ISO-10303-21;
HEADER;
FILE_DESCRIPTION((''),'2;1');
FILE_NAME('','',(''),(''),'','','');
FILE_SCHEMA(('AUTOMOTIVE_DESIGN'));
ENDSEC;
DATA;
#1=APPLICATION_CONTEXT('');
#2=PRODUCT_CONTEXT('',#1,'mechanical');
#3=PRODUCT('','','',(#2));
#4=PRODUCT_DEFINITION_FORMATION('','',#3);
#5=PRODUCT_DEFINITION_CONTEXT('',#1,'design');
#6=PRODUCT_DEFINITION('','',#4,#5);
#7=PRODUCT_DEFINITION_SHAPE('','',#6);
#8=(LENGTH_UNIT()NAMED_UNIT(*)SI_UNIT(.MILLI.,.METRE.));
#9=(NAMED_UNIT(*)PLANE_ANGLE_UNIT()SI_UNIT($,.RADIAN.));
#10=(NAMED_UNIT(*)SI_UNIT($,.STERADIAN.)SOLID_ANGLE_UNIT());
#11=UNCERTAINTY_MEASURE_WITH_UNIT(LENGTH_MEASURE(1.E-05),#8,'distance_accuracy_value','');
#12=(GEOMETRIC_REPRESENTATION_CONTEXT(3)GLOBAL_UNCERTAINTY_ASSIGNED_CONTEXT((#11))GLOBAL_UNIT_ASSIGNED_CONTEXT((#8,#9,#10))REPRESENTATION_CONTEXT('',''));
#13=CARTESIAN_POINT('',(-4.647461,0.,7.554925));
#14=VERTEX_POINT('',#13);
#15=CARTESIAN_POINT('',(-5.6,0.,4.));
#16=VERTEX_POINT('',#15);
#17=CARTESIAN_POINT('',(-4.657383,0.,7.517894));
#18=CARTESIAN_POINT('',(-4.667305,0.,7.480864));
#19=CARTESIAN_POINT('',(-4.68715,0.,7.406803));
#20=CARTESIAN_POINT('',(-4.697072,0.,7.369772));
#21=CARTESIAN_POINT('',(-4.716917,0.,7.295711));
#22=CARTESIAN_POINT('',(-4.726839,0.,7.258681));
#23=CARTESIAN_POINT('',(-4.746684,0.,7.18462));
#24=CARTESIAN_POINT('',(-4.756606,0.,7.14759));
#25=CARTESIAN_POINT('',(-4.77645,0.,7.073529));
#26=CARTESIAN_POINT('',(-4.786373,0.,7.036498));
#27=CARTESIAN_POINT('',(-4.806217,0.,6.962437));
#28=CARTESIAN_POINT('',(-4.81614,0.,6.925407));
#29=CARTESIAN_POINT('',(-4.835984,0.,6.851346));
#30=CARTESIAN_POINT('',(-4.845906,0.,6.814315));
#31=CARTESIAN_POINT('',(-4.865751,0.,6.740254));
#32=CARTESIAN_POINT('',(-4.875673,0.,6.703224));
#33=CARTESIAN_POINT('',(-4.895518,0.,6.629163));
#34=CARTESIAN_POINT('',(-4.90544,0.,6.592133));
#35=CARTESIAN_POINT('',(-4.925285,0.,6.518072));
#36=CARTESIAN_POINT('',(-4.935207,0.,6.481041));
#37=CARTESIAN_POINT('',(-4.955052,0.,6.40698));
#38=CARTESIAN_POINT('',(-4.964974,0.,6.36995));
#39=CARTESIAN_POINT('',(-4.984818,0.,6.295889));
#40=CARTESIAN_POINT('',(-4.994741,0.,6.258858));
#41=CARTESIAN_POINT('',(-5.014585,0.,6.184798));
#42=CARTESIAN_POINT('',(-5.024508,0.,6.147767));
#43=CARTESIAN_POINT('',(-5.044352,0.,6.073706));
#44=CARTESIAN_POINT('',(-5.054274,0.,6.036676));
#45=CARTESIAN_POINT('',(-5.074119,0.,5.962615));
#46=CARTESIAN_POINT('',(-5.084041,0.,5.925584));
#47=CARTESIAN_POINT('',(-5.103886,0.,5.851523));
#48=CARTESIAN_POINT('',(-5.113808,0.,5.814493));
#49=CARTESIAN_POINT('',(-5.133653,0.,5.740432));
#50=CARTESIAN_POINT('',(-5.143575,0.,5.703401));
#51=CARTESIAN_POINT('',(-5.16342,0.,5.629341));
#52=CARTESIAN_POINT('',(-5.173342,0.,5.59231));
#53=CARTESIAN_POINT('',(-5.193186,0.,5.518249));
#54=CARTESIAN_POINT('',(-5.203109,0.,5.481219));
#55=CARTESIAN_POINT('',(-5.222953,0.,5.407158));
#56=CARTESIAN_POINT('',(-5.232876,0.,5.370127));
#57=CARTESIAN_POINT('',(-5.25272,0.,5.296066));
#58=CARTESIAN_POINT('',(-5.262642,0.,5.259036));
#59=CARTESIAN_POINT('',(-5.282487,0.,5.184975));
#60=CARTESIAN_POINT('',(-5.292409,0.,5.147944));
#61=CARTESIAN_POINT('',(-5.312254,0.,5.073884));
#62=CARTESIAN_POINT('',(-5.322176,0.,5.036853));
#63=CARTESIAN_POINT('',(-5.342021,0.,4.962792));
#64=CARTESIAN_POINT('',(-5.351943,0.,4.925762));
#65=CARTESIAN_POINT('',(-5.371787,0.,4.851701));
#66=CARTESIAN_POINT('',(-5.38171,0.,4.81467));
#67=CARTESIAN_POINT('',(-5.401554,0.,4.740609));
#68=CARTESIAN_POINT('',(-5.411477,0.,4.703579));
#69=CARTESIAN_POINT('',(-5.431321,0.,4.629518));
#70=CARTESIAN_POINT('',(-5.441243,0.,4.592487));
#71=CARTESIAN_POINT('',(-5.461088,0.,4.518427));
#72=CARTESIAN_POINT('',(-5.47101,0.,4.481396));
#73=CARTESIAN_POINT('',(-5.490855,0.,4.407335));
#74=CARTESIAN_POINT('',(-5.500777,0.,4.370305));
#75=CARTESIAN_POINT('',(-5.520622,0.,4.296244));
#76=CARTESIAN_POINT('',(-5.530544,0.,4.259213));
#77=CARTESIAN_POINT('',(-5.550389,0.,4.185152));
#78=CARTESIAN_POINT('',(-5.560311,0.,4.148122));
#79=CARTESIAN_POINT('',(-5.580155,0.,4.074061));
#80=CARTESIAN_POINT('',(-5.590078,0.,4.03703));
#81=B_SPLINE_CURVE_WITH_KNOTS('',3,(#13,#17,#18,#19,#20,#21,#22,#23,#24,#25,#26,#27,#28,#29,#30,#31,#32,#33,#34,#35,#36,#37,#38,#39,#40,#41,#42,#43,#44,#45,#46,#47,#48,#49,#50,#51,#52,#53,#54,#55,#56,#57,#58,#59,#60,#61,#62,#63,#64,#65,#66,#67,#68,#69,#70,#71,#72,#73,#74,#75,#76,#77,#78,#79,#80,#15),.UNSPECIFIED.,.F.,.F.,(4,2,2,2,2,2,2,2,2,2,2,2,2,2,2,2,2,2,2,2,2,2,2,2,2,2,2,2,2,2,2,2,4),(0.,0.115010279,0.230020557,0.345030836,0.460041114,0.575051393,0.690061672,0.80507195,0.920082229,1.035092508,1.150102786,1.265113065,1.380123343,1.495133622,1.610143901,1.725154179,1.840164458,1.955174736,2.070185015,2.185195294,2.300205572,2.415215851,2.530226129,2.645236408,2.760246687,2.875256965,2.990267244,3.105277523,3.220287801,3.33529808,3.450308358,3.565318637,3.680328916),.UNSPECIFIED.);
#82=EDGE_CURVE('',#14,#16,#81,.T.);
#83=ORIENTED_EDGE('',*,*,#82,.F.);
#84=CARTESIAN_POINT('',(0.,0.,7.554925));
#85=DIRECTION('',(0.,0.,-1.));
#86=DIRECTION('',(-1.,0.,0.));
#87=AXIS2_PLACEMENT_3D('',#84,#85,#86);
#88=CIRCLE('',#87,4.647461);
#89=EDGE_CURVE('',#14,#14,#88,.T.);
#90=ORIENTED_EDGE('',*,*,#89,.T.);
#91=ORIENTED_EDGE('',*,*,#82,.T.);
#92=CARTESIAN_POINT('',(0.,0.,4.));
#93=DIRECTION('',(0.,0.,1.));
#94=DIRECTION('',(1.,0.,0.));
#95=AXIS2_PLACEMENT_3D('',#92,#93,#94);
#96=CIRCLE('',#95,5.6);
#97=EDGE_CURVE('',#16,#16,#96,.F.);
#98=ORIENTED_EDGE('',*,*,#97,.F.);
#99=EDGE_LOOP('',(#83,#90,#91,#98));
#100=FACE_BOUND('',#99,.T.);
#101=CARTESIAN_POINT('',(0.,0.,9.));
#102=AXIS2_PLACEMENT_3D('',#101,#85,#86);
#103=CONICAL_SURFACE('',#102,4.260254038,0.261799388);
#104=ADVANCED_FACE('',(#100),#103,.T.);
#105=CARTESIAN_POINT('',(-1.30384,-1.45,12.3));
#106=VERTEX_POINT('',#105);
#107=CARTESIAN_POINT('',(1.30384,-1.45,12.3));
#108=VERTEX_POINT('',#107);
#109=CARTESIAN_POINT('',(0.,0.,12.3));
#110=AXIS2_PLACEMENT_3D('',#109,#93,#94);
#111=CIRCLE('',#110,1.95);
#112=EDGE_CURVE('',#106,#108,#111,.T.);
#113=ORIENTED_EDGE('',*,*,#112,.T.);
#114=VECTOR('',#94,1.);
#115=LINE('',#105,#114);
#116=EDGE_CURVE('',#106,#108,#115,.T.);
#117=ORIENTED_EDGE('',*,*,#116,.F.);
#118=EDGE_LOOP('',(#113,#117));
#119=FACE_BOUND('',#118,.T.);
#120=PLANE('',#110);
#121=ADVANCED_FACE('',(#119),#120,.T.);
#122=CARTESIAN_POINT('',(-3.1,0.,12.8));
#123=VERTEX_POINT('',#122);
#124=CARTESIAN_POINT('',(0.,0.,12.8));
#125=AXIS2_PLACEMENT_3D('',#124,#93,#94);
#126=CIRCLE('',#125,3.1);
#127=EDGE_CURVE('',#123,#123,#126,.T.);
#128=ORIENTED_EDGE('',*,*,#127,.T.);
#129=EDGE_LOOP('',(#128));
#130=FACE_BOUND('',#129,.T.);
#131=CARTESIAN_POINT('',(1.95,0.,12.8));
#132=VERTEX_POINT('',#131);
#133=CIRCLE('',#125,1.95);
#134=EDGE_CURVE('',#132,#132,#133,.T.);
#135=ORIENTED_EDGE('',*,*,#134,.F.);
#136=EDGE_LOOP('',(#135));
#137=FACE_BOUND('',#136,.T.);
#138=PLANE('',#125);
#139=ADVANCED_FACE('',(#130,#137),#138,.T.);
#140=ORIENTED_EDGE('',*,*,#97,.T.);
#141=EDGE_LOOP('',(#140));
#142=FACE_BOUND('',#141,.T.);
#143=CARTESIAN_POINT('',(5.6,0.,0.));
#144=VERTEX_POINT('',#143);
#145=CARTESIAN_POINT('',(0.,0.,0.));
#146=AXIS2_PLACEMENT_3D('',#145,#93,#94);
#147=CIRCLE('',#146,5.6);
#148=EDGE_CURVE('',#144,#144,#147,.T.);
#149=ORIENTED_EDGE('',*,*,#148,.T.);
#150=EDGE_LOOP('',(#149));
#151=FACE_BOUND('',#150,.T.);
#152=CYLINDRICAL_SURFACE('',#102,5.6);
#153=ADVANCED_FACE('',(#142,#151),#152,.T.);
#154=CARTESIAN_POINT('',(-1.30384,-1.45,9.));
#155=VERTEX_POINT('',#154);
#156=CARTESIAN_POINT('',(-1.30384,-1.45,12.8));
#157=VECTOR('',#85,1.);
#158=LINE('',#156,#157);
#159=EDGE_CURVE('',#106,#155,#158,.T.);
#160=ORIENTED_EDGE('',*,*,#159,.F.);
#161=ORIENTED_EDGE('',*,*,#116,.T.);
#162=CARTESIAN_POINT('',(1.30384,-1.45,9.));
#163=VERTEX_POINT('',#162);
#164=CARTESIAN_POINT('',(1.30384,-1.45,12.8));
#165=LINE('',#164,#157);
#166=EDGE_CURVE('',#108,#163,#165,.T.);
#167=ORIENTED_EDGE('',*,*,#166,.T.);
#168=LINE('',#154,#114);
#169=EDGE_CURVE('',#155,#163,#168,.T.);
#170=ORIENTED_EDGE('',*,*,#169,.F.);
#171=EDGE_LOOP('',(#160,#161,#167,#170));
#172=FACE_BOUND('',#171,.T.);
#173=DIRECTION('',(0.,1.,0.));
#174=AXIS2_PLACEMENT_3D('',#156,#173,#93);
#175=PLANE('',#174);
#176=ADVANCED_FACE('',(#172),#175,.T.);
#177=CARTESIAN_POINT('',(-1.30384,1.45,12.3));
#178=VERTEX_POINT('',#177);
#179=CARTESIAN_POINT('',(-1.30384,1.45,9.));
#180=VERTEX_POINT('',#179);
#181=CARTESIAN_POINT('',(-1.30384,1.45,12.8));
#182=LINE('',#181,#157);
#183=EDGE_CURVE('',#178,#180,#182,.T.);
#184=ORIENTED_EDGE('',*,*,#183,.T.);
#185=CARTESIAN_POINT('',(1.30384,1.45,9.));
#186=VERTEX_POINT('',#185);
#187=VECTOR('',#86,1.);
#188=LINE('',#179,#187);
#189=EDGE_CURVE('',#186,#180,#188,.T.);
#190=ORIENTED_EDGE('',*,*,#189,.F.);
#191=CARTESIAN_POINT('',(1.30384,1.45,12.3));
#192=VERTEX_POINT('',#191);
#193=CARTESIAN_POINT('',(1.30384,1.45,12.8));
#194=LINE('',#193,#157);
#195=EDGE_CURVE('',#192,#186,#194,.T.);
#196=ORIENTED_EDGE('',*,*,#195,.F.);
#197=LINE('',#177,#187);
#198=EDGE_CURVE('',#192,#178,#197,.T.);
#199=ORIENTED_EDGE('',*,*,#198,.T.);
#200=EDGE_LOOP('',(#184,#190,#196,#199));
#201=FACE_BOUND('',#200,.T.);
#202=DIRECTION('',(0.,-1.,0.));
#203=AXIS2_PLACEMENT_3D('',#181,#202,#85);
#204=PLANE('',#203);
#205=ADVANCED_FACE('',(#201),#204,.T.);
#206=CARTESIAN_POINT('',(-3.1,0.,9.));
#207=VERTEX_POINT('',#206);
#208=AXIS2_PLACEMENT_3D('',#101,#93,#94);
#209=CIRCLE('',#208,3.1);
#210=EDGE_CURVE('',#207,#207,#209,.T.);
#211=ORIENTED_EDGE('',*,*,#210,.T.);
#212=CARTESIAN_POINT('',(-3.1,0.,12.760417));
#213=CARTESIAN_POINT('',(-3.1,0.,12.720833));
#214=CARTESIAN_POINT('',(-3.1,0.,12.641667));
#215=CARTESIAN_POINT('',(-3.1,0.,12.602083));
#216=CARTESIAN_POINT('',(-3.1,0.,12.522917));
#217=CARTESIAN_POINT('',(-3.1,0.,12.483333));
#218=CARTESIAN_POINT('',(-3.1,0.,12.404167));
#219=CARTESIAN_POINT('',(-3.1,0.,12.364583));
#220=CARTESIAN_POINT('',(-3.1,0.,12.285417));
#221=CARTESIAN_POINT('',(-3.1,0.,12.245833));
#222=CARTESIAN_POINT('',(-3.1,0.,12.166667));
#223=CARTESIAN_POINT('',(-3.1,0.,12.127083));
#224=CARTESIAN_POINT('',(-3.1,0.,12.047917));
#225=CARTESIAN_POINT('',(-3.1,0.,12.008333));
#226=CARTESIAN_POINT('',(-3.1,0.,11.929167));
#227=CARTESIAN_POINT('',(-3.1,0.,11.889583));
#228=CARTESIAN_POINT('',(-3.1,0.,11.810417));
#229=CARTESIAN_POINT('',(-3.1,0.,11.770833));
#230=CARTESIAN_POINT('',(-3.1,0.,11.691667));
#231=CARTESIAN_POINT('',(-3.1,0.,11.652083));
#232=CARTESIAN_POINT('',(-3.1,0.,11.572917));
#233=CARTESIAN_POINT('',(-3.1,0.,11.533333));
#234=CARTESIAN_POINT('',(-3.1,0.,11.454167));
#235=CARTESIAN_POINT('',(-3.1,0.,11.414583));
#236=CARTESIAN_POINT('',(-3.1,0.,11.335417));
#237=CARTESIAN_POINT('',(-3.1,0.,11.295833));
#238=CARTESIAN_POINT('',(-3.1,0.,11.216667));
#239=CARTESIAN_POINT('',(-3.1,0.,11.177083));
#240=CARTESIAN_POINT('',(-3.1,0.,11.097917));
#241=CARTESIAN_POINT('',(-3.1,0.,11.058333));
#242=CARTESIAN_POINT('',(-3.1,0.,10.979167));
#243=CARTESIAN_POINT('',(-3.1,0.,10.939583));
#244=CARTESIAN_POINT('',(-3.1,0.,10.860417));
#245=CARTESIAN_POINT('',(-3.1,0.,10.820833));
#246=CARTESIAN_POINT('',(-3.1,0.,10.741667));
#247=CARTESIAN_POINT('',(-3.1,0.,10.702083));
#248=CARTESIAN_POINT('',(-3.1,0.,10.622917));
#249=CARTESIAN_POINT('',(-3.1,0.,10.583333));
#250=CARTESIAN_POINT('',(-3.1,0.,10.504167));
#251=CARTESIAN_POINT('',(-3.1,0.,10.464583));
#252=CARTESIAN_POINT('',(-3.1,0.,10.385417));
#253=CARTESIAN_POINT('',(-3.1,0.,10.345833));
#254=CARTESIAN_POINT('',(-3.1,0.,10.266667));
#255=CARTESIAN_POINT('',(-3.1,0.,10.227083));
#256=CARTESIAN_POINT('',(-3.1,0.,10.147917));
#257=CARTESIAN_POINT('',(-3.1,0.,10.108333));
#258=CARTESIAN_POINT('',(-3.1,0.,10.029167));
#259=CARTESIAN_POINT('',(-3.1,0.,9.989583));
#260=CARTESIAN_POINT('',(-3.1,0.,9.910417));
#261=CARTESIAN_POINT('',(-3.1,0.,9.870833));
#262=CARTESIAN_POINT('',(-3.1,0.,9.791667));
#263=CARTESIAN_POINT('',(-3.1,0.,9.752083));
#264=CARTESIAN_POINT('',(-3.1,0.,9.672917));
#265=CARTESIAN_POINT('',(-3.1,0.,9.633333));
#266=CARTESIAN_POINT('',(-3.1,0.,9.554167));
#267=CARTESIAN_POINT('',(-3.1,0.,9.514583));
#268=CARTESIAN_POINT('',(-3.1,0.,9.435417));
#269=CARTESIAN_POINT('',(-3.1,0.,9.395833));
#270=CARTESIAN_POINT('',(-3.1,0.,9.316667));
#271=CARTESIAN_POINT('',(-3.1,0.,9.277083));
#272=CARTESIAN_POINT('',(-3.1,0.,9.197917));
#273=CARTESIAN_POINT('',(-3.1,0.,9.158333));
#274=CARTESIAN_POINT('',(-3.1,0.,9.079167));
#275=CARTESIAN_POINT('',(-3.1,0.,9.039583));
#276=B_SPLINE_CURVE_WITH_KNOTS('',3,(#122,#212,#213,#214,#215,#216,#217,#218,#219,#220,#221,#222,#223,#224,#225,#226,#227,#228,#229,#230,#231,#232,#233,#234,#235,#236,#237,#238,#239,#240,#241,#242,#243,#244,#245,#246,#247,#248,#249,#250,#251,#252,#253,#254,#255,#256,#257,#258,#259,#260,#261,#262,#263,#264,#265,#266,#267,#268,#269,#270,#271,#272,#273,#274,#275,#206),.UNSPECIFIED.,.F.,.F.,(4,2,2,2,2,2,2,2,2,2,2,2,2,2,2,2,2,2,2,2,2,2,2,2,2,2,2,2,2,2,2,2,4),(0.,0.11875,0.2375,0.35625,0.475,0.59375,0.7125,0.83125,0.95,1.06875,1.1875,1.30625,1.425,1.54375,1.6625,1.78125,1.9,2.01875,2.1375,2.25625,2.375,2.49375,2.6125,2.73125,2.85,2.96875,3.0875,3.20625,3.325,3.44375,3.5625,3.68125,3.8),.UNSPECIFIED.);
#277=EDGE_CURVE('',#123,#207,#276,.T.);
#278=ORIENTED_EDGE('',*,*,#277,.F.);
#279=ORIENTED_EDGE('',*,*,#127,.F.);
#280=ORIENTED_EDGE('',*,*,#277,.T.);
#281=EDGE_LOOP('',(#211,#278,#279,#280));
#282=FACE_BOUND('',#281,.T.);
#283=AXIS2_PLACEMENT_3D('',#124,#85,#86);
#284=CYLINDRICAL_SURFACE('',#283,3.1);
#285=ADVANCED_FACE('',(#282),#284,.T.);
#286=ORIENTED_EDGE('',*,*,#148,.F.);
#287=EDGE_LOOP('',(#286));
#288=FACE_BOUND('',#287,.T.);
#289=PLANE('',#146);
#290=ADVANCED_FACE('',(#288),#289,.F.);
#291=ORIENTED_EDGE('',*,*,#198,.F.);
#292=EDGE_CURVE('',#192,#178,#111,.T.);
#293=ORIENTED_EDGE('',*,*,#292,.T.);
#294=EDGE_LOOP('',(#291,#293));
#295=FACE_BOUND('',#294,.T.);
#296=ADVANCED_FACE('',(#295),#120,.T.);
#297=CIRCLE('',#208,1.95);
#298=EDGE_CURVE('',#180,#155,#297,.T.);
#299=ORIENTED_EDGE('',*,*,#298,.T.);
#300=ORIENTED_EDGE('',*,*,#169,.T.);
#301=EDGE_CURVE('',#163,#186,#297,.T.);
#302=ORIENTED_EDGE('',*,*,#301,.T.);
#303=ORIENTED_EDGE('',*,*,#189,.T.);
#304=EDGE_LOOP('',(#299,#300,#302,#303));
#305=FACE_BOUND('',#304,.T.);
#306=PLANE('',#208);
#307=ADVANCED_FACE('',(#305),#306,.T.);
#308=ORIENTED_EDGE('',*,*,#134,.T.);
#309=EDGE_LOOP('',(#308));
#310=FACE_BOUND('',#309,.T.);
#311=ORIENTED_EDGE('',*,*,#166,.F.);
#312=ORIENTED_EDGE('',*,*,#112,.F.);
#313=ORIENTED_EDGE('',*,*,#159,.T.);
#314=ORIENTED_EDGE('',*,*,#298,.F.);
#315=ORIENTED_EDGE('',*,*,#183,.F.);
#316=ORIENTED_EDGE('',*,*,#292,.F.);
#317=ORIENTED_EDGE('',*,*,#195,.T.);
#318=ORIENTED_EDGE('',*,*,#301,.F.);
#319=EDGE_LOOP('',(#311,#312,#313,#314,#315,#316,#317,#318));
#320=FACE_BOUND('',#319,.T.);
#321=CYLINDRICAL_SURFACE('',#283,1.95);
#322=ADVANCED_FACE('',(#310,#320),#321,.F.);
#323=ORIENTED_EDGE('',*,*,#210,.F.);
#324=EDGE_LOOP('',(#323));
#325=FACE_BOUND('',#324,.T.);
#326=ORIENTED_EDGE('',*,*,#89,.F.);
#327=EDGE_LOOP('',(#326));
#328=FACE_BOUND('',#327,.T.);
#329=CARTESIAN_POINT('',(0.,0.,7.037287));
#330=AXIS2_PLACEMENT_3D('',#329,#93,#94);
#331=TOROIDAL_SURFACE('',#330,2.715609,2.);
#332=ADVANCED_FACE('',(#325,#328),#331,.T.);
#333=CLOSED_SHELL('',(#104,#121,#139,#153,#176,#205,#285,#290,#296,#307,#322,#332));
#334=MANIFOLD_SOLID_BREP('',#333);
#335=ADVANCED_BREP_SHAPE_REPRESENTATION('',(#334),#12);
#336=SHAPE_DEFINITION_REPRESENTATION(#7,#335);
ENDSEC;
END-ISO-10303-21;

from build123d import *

# Parameters (mm, degrees)
SKETCH1_R           = 5.6
BOSS_EXTRUDE1_DEPTH = 9
SKETCH2_R           = 3.1
BOSS_EXTRUDE2_DEPTH = 3.8
CUT_EXTRUDE1_START  = -0.5
SKETCH3_R           = 1.95
CUT_EXTRUDE1_DEPTH  = 0.5
CHAMFER1_SIZE       = 5
CHAMFER1_SIZE2      = 1.339745962
FILLET1_R           = 2


with BuildPart() as part:
    # Sketch1 → Boss-Extrude1 (new body)
    with BuildSketch(Plane.XY):
        Circle(SKETCH1_R)
    extrude(amount=BOSS_EXTRUDE1_DEPTH)

    # Sketch2 → Boss-Extrude2 (add)
    with BuildSketch(Plane.XY.offset(9)):
        with Locations(Location((0, 0, 0), (0, 0, 180))):
            Circle(SKETCH2_R)
        with BuildLine():
            Line((-1.303840481, -1.45), (1.303840481, -1.45))
            ThreePointArc((1.303840481, -1.45), (1.95, 0), (1.303840481, 1.45))
            Line((1.303840481, 1.45), (-1.303840481, 1.45))
            ThreePointArc((-1.303840481, 1.45), (-1.95, 0), (-1.303840481, -1.45))
        make_face(mode=Mode.SUBTRACT)
    extrude(amount=BOSS_EXTRUDE2_DEPTH)

    # Sketch3 → Cut-Extrude1 (cut)
    with BuildSketch(Plane.XY.offset(12.8).offset(CUT_EXTRUDE1_START)):
        with Locations(Location((0, 0, 0), (0, 0, 131.961888828))):
            Circle(SKETCH3_R)
    extrude(amount=CUT_EXTRUDE1_DEPTH, mode=Mode.SUBTRACT)

    # Chamfer1
    chamfer1_edges = [part.edges().sort_by_distance(p)[0] for p in [
        (-5.6, 0, 9),
    ]]
    chamfer1_side = [part.faces().sort_by_distance(p)[0] for p in [
        (-5.6, 0, 4.5),
    ]]
    chamfer(chamfer1_edges, length=CHAMFER1_SIZE, length2=CHAMFER1_SIZE2, reference=chamfer1_side[0])

    # Fillet1
    # the kernel refuses this fillet: 2 mm, written as the material it takes off along each edge
    with BuildSketch(Plane(origin=(0, 0, 9), x_dir=(1, 0, 0), z_dir=(0, -1, 0))) as fillet1_piece_1:
        with BuildLine():
            CenterArc((2.715609132, -1.962713341), FILLET1_R, 15, 63.919064975)
            Line((3.1, 0), (3.107687817, 0.039254267))
            ThreePointArc((3.107687817, 0.039254267), (3.680127019, 0.04), (4.260254038, 0.04))
            Line((4.260254038, 0.04), (4.298891071, 0.010352762))
            Line((4.298891071, 0.010352762), (4.686097817, -1.434722489))
            Line((4.686097817, -1.434722489), (4.647460784, -1.445075251))
        make_face()
    revolve(axis=Axis((0, 0, 9), (0, 0, 1)), mode=Mode.SUBTRACT)


solid = part.part
